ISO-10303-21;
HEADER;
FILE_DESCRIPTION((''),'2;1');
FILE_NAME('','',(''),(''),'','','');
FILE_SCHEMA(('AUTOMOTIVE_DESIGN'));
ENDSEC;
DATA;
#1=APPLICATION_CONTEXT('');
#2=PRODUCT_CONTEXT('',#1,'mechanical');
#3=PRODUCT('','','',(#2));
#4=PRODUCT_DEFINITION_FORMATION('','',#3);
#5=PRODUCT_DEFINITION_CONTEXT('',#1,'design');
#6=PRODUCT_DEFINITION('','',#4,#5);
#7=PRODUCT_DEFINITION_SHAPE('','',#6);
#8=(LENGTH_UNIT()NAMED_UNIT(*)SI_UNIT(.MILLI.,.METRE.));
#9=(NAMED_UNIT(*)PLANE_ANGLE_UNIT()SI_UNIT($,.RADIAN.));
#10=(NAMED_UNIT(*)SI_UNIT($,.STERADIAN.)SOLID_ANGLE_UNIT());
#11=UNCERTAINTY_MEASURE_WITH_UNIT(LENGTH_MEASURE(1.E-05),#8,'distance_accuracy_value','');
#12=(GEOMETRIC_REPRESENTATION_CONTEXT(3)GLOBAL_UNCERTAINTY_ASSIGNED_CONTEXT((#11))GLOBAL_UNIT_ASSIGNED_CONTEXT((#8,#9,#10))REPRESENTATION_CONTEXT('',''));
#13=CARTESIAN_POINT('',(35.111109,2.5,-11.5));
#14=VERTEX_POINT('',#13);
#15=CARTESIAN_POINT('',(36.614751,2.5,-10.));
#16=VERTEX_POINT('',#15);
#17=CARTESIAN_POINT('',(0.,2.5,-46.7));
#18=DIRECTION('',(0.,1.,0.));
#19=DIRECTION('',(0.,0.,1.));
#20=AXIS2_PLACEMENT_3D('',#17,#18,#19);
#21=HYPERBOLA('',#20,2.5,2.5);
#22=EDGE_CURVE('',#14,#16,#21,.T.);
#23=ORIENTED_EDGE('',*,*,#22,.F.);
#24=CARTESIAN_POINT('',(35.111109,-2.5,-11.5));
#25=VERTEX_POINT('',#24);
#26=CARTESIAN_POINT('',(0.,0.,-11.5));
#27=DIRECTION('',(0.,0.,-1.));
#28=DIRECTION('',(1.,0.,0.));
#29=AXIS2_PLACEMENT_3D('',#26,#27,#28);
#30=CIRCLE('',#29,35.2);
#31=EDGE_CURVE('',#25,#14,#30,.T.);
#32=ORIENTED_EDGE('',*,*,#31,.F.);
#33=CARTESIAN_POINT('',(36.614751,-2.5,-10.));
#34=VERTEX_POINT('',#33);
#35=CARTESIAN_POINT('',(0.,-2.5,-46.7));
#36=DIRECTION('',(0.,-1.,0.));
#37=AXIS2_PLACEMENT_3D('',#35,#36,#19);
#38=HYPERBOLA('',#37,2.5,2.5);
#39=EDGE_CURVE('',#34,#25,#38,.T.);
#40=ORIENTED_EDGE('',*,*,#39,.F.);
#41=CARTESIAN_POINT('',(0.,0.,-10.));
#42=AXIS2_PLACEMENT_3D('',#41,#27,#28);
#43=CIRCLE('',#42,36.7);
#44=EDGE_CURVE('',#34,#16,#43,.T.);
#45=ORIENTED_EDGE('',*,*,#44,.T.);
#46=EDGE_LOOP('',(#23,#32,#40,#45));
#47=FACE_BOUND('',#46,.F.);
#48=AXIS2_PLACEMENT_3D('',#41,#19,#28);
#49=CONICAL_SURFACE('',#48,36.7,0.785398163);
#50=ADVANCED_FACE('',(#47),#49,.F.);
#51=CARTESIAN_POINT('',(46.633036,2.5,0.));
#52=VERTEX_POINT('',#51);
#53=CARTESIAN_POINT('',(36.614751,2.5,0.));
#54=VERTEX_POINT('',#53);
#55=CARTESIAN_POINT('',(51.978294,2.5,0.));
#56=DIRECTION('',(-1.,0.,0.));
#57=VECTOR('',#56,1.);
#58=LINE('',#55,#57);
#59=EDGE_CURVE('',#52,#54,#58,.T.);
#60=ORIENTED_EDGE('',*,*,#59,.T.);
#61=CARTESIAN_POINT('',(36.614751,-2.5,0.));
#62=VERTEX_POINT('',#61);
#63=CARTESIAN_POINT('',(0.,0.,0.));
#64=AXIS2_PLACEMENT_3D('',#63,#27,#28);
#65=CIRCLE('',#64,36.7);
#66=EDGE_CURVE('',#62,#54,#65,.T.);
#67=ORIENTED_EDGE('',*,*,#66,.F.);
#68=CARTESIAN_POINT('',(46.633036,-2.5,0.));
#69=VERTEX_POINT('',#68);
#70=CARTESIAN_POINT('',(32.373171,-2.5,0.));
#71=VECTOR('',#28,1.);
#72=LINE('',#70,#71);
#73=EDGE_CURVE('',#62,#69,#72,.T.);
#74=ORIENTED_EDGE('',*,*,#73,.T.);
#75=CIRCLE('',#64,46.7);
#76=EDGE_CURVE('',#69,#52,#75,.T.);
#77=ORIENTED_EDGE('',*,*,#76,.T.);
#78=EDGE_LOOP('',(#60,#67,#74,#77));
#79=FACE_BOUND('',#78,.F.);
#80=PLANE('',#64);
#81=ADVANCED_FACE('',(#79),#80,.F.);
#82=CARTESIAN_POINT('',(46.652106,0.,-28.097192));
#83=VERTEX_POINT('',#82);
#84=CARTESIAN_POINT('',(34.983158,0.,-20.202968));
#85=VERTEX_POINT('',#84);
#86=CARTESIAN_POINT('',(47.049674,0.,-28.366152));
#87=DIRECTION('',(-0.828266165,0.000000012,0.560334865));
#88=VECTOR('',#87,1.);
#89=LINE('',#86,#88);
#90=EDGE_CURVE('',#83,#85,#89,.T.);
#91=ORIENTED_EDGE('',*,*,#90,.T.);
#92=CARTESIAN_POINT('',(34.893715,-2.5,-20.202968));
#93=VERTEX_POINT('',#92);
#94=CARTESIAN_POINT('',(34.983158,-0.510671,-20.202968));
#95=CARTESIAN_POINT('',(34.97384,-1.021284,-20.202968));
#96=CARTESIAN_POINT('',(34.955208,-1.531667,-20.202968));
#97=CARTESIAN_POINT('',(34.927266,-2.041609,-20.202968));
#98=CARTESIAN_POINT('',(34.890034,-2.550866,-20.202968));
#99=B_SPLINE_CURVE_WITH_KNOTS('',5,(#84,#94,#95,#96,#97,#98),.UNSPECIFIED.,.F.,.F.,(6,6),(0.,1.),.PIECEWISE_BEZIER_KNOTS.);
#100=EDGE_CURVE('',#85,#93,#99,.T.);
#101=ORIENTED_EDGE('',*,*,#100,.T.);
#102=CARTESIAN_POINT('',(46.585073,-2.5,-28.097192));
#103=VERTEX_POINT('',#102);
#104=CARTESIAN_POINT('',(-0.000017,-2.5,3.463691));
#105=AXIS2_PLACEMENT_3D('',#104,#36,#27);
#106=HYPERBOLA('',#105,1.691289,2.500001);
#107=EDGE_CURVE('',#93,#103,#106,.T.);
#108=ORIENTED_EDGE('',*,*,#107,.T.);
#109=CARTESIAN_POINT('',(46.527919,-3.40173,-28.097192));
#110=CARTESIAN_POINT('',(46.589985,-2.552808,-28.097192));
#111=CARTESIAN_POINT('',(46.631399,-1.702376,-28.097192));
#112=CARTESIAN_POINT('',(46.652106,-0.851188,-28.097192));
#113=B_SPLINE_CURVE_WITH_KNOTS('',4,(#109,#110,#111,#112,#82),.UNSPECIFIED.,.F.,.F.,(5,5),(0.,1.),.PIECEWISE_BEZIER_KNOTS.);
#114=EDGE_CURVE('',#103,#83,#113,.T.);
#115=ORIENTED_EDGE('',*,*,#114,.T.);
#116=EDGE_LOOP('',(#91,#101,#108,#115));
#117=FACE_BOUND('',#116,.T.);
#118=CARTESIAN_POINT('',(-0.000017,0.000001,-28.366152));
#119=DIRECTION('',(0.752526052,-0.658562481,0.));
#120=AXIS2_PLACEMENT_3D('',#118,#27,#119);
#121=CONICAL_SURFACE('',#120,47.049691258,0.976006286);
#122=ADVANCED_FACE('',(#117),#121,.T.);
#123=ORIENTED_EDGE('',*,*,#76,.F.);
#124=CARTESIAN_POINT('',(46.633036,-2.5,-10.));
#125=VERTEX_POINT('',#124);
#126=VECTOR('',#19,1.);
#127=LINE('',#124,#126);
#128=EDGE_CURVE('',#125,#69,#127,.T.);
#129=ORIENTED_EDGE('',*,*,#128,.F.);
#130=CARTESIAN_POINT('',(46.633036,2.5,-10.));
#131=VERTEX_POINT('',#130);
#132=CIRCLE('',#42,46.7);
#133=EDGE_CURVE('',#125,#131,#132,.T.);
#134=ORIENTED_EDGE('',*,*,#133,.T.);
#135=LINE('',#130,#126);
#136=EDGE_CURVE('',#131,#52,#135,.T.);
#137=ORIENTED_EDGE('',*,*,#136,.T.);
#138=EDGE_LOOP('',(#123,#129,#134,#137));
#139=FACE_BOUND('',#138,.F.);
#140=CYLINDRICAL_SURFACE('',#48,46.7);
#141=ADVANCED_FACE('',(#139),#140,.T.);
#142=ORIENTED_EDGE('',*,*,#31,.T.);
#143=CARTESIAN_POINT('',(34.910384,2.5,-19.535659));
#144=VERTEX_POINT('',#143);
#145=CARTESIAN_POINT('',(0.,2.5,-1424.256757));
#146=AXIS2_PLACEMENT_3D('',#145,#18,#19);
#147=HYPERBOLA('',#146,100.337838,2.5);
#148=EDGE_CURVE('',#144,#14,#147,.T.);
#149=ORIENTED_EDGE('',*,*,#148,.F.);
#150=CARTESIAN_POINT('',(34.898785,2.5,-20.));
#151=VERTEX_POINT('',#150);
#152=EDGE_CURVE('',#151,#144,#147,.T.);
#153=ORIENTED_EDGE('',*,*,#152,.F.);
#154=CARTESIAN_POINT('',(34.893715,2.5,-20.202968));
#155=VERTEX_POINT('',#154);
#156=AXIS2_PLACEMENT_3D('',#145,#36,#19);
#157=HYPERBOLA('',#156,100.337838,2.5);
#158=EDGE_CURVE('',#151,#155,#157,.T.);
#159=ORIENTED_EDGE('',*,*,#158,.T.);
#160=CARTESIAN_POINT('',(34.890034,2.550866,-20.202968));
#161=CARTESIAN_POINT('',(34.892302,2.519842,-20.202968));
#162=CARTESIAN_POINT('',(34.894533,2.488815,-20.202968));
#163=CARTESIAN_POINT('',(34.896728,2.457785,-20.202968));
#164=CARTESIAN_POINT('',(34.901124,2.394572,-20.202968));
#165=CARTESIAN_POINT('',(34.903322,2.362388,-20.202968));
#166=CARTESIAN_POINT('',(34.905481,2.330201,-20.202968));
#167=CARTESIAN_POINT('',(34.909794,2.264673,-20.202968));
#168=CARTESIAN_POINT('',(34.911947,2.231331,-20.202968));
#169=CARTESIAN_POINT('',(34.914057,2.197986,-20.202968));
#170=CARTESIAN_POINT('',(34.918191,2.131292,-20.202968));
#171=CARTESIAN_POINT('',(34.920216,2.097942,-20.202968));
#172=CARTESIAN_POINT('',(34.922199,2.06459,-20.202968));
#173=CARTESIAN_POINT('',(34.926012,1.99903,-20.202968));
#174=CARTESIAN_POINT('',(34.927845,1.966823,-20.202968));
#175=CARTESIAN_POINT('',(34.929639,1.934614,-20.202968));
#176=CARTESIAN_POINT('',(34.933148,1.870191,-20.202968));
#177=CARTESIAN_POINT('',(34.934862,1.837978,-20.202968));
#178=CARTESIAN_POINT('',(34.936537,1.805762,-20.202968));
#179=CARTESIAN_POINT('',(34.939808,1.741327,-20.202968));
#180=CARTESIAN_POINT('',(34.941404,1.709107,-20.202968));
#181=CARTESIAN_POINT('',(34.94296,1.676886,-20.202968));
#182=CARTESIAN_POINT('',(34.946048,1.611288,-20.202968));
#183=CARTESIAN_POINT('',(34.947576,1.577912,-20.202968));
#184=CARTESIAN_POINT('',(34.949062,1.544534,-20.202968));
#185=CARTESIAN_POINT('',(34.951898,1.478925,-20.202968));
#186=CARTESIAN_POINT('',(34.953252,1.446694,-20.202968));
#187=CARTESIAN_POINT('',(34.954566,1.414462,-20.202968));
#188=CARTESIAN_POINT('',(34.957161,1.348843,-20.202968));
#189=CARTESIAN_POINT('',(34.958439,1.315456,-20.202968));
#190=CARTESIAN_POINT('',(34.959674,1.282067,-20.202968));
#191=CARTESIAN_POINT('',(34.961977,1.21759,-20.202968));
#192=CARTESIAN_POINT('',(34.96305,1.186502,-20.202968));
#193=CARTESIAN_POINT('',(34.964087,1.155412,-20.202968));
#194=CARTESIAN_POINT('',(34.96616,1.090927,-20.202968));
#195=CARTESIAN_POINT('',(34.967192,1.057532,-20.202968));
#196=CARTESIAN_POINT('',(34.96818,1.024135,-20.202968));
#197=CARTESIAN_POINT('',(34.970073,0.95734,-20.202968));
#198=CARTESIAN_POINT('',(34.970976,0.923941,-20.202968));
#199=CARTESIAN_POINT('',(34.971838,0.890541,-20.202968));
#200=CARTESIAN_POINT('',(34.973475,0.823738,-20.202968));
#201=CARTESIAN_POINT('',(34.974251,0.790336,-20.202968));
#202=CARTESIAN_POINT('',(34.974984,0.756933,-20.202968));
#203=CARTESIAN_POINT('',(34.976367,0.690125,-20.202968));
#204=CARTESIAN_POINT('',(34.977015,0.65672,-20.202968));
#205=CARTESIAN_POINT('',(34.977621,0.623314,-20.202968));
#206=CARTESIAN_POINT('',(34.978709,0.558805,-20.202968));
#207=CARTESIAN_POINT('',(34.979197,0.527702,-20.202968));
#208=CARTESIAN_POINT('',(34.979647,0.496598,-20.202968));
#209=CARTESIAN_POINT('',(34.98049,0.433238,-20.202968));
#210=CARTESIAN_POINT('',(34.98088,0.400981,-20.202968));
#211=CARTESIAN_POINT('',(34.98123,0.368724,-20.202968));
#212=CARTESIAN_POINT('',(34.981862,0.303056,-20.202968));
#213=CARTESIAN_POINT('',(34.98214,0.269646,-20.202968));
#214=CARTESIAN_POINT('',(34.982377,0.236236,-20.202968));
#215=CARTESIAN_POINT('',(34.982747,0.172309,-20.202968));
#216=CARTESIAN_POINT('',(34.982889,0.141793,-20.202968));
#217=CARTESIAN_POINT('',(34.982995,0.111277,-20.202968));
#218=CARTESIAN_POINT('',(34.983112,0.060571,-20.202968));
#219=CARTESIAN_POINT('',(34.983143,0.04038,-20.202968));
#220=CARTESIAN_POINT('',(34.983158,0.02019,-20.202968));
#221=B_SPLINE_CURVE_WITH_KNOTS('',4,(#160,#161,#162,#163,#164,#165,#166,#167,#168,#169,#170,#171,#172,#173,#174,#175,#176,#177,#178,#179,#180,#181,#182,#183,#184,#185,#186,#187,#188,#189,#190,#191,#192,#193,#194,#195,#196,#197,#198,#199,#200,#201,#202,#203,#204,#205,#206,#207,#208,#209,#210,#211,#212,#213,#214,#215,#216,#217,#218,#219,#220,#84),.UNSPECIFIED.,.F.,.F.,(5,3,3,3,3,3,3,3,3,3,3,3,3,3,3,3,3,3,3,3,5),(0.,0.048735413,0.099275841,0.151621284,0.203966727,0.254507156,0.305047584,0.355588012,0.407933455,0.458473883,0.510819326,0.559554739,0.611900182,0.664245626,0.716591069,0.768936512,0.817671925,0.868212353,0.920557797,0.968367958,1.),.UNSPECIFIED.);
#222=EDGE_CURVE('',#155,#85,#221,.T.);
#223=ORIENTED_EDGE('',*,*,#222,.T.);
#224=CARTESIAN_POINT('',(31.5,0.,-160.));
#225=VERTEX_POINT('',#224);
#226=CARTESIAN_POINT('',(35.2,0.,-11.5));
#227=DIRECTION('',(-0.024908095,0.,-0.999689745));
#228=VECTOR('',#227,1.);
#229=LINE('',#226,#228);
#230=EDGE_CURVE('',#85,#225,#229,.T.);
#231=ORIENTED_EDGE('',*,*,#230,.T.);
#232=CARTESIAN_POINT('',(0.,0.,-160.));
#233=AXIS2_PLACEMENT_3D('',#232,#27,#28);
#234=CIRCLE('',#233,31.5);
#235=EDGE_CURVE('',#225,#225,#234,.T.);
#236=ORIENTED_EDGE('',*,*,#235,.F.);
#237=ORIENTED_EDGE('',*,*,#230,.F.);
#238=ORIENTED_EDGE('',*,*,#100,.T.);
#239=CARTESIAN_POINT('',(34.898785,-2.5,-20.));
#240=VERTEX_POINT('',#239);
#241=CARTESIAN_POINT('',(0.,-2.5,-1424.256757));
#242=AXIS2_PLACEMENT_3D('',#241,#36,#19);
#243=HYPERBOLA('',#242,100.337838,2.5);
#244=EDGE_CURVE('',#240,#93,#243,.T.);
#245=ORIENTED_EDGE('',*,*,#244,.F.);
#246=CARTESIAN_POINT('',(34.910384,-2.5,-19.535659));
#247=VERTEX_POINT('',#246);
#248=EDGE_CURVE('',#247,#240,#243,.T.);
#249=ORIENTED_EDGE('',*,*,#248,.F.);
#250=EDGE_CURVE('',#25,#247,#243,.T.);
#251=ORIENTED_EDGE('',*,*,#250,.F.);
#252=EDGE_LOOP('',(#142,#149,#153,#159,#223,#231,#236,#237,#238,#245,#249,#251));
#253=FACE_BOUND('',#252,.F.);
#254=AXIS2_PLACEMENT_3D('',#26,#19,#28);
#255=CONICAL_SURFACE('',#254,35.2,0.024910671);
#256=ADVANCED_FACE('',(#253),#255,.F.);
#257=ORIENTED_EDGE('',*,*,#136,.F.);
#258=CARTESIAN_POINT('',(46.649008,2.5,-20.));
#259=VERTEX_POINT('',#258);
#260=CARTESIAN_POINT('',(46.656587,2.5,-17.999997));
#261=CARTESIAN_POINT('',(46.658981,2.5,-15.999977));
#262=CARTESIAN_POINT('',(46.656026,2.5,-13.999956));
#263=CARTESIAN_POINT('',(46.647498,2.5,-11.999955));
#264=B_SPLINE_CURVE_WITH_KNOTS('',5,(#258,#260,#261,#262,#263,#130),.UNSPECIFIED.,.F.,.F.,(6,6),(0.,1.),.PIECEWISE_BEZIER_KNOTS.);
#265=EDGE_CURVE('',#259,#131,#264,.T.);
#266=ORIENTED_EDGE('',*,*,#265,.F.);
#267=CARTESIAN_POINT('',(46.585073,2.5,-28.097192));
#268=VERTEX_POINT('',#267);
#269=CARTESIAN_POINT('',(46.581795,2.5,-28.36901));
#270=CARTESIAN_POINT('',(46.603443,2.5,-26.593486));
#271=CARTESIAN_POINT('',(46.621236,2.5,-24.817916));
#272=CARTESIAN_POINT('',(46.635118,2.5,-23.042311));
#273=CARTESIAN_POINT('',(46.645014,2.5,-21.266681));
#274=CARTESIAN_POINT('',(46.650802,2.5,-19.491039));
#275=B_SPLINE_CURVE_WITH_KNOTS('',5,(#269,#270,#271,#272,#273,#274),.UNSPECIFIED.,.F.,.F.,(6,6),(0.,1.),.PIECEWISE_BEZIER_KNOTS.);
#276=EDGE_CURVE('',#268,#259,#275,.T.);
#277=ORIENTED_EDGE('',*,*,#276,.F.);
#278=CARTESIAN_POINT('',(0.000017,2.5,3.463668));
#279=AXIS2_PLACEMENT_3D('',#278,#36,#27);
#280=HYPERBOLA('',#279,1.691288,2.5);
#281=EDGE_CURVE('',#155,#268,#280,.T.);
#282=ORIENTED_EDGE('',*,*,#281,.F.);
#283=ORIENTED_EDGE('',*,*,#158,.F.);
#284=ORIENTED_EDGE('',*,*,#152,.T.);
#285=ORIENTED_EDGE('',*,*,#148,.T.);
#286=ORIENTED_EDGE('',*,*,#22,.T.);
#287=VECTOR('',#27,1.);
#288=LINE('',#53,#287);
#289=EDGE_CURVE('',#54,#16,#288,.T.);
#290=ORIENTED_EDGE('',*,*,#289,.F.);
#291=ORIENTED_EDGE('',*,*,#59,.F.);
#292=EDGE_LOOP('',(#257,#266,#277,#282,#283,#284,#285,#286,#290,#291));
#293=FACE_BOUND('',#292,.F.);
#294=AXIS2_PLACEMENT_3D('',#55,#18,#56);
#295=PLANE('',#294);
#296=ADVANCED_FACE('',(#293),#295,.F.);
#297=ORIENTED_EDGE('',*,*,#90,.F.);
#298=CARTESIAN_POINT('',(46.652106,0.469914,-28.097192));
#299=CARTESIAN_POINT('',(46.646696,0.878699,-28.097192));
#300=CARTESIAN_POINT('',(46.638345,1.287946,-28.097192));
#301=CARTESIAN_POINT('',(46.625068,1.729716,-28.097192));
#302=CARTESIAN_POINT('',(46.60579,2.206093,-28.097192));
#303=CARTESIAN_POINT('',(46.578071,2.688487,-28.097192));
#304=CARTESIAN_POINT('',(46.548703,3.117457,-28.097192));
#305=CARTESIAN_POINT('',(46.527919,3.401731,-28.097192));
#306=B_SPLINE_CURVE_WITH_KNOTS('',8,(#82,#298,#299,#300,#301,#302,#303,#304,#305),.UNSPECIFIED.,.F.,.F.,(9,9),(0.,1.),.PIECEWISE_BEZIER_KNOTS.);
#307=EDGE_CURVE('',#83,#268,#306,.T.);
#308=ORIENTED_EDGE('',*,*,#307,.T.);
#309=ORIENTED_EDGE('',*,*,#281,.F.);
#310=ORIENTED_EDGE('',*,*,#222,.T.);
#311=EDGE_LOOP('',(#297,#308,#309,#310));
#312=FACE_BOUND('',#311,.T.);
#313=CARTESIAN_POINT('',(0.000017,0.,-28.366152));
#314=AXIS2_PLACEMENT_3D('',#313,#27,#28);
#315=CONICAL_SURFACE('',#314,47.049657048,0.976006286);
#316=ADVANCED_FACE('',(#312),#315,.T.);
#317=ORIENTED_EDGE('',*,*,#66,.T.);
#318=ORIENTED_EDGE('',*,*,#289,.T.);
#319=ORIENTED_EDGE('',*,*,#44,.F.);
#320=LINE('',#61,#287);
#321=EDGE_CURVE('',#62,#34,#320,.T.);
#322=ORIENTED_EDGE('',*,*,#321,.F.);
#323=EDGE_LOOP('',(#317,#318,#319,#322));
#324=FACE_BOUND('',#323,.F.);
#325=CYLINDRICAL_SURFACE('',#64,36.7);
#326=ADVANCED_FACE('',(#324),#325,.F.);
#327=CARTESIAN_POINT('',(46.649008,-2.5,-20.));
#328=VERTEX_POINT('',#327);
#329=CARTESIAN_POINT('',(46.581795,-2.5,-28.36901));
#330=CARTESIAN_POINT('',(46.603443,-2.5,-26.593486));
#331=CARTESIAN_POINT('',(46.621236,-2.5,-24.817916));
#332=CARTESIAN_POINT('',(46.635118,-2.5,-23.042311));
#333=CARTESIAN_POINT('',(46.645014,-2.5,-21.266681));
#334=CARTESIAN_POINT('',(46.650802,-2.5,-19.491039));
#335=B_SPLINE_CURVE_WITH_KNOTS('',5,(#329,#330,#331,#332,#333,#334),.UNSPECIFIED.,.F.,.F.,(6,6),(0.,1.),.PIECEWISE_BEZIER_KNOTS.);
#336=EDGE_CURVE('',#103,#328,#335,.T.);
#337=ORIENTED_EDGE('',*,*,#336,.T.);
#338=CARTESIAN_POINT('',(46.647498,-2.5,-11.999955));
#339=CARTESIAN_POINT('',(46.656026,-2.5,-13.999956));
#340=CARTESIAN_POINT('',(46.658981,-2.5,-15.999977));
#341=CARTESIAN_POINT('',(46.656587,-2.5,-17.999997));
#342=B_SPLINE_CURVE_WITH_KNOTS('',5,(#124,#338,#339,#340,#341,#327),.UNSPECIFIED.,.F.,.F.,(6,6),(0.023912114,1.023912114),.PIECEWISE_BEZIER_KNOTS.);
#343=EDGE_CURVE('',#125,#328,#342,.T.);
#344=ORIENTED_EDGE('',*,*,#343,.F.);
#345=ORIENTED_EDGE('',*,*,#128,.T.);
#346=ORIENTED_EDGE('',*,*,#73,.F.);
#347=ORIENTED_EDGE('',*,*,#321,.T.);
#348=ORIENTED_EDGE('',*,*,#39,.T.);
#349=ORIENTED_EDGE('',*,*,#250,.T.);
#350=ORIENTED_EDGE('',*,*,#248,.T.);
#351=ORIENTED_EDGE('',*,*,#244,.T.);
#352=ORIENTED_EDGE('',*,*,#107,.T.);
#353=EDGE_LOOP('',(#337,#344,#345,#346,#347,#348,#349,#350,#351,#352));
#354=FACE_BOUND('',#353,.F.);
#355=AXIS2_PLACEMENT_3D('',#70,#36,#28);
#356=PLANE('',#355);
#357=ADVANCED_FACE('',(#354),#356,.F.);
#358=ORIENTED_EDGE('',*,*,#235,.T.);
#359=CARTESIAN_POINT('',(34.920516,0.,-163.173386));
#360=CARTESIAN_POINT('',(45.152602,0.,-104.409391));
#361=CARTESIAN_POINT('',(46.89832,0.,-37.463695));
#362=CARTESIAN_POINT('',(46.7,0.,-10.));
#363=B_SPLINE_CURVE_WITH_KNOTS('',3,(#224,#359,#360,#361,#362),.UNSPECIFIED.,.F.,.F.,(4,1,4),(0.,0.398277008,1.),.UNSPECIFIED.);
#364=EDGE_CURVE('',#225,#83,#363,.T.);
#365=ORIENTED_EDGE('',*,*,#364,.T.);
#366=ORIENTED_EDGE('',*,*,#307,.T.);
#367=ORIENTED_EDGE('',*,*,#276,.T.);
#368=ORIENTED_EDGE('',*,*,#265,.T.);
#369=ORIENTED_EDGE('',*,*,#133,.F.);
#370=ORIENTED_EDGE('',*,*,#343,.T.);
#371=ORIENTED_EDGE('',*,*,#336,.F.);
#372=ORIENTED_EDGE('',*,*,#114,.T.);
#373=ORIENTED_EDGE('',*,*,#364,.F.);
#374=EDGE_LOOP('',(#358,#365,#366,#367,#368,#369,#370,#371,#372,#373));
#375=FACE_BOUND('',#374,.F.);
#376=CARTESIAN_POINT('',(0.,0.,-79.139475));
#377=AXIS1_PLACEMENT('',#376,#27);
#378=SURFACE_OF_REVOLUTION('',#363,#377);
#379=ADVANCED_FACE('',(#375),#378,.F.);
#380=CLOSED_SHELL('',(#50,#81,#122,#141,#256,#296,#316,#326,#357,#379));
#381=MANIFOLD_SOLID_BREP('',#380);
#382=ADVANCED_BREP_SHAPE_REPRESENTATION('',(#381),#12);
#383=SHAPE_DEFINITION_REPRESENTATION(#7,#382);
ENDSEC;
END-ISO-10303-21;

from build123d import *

# Parameters (mm, degrees)
F3_DEPTH    = 20
F4_T4_ANGLE = 41.1903305593
F4_T9_ANGLE = 41.1903607256


# Not quite as in the source:
# - a fillet or chamfer that OpenCascade refuses, or shapes differently, is made with other operations: its cross-section is extruded or revolved along the edge and cut away or added


with BuildPart() as f1:
    # F0 (on Front) → F1 (revolve)
    with BuildSketch(Plane.XZ):
        with BuildLine():
            Line((46.7, 0), (36.7, 0))
            Line((36.7, 0), (36.7, -10))
            Line((36.7, -10), (35.2, -11.5))
            Line((35.2, -11.5), (31.5, -160))
            add(Edge.make_bspline(
                [(31.5, -160), (34.9205158198, -163.1733860852), (45.1526020923, -104.4093913174), (46.8983203173, -37.4636948109), (46.7, -10)],
                knots=[0, 0, 0, 0, 0.3982770084, 1, 1, 1, 1], degree=3))
            Line((46.7, -10), (46.7, 0))
        make_face()
    revolve(axis=Axis((0, 0, -79.1394754779), (0, 0, -1)))

    # F2 (on face) → F3 (cut)
    with BuildSketch(Plane.XY):
        with BuildLine():
            ThreePointArc((46.6330355006, 2.5), (46.6832558734, 1.250448344), (46.7, 0))
            ThreePointArc((46.7, 0), (46.6832558734, -1.250448344), (46.6330355006, -2.5))
            Line((46.6330355006, -2.5), (51.9782938063, -2.5))
            Line((51.9782938063, -2.5), (51.9782938063, 2.5))
            Line((51.9782938063, 2.5), (46.6330355006, 2.5))
        make_face()
        with BuildLine():
            ThreePointArc((46.6330355006, -2.5), (46.6832558734, -1.250448344), (46.7, 0))
            ThreePointArc((46.7, 0), (46.6832558734, 1.250448344), (46.6330355006, 2.5))
            Line((46.6330355006, 2.5), (36.6147511257, 2.5))
            ThreePointArc((36.6147511257, 2.5), (36.6786815897, 1.2507265259), (36.7, 0))
            ThreePointArc((36.7, 0), (36.6786815897, -1.2507265259), (36.6147511257, -2.5))
            Line((36.6147511257, -2.5), (46.6330355006, -2.5))
        make_face()
        with BuildLine():
            ThreePointArc((36.7, 0), (36.6786815897, 1.2507265259), (36.6147511257, 2.5))
            Line((36.6147511257, 2.5), (32.3731712997, 2.5))
            Line((32.3731712997, 2.5), (32.3731712997, -2.5))
            Line((32.3731712997, -2.5), (36.6147511257, -2.5))
            ThreePointArc((36.6147511257, -2.5), (36.6786815897, -1.2507265259), (36.7, 0))
        make_face()
    extrude(amount=-F3_DEPTH, mode=Mode.SUBTRACT)

    # F4: chamfer of 12 x 8 on 2 edges, made by hand


with BuildPart() as f4_tool2:
    # F4_s3 → F4_t4 (revolve)
    with BuildSketch(Plane(origin=(-7.0888e-06, -8.1003e-06, 0), x_dir=(0, 0, 1), z_dir=(-0.6585624812, -0.7525260516, 0))):
        with BuildLine():
            Line((-28.3661524227, -47.0496779531), (-19.7310392649, -34.2855747254))
            Line((-19.7310392649, -34.2855747254), (-19.4910392649, -34.2855747254))
            ThreePointArc((-19.4910392649, -34.2855747254), (-19.76, -40.500764232), (-19.76, -46.7159537386))
            Line((-19.76, -46.7159537386), (-20.0009080776, -46.9559520207))
            ThreePointArc((-20.0009080776, -46.9559520207), (-24.1834649208, -46.9311818232), (-28.3690103838, -47.2896609359))
            Line((-28.3690103838, -47.2896609359), (-28.3661524227, -47.0496779531))
        make_face()
    revolve(axis=Axis((-1.71008e-05, 6.615e-07, -20), (0, 0, 1)), revolution_arc=F4_T4_ANGLE)

    split(bisect_by=Plane.XZ.offset(2.5), keep=Keep.BOTTOM)


with BuildPart() as f1_1:
    add(f1.part)

    # F4_t1: cut F4_tool2
    add(f4_tool2.part, mode=Mode.SUBTRACT)


with BuildPart() as f4_tool7:
    # F4_s8 → F4_t9 (revolve)
    with BuildSketch(Plane.XZ.offset(-2.542e-07)):
        with BuildLine():
            Line((47.0496741445, -28.3661524227), (34.2855709168, -19.7310392649))
            Line((34.2855709168, -19.7310392649), (34.2855709168, -19.4910392649))
            ThreePointArc((34.2855709168, -19.4910392649), (40.5007604241, -19.76), (46.7159499314, -19.76))
            Line((46.7159499314, -19.76), (46.9559482135, -20.0009080776))
            ThreePointArc((46.9559482135, -20.0009080776), (46.9311780146, -24.1834649208), (47.2896571273, -28.3690103838))
            Line((47.2896571273, -28.3690103838), (47.0496741445, -28.3661524227))
        make_face()
    revolve(axis=Axis((1.70968e-05, 2.542e-07, -20), (0, 0, 1)), revolution_arc=F4_T9_ANGLE)

    split(bisect_by=Plane.XZ.offset(-2.5), keep=Keep.TOP)


with BuildPart() as f1_2:
    add(f1_1.part)

    # F4_t6: cut F4_tool7
    add(f4_tool7.part, mode=Mode.SUBTRACT)


solid = f1_2.part
